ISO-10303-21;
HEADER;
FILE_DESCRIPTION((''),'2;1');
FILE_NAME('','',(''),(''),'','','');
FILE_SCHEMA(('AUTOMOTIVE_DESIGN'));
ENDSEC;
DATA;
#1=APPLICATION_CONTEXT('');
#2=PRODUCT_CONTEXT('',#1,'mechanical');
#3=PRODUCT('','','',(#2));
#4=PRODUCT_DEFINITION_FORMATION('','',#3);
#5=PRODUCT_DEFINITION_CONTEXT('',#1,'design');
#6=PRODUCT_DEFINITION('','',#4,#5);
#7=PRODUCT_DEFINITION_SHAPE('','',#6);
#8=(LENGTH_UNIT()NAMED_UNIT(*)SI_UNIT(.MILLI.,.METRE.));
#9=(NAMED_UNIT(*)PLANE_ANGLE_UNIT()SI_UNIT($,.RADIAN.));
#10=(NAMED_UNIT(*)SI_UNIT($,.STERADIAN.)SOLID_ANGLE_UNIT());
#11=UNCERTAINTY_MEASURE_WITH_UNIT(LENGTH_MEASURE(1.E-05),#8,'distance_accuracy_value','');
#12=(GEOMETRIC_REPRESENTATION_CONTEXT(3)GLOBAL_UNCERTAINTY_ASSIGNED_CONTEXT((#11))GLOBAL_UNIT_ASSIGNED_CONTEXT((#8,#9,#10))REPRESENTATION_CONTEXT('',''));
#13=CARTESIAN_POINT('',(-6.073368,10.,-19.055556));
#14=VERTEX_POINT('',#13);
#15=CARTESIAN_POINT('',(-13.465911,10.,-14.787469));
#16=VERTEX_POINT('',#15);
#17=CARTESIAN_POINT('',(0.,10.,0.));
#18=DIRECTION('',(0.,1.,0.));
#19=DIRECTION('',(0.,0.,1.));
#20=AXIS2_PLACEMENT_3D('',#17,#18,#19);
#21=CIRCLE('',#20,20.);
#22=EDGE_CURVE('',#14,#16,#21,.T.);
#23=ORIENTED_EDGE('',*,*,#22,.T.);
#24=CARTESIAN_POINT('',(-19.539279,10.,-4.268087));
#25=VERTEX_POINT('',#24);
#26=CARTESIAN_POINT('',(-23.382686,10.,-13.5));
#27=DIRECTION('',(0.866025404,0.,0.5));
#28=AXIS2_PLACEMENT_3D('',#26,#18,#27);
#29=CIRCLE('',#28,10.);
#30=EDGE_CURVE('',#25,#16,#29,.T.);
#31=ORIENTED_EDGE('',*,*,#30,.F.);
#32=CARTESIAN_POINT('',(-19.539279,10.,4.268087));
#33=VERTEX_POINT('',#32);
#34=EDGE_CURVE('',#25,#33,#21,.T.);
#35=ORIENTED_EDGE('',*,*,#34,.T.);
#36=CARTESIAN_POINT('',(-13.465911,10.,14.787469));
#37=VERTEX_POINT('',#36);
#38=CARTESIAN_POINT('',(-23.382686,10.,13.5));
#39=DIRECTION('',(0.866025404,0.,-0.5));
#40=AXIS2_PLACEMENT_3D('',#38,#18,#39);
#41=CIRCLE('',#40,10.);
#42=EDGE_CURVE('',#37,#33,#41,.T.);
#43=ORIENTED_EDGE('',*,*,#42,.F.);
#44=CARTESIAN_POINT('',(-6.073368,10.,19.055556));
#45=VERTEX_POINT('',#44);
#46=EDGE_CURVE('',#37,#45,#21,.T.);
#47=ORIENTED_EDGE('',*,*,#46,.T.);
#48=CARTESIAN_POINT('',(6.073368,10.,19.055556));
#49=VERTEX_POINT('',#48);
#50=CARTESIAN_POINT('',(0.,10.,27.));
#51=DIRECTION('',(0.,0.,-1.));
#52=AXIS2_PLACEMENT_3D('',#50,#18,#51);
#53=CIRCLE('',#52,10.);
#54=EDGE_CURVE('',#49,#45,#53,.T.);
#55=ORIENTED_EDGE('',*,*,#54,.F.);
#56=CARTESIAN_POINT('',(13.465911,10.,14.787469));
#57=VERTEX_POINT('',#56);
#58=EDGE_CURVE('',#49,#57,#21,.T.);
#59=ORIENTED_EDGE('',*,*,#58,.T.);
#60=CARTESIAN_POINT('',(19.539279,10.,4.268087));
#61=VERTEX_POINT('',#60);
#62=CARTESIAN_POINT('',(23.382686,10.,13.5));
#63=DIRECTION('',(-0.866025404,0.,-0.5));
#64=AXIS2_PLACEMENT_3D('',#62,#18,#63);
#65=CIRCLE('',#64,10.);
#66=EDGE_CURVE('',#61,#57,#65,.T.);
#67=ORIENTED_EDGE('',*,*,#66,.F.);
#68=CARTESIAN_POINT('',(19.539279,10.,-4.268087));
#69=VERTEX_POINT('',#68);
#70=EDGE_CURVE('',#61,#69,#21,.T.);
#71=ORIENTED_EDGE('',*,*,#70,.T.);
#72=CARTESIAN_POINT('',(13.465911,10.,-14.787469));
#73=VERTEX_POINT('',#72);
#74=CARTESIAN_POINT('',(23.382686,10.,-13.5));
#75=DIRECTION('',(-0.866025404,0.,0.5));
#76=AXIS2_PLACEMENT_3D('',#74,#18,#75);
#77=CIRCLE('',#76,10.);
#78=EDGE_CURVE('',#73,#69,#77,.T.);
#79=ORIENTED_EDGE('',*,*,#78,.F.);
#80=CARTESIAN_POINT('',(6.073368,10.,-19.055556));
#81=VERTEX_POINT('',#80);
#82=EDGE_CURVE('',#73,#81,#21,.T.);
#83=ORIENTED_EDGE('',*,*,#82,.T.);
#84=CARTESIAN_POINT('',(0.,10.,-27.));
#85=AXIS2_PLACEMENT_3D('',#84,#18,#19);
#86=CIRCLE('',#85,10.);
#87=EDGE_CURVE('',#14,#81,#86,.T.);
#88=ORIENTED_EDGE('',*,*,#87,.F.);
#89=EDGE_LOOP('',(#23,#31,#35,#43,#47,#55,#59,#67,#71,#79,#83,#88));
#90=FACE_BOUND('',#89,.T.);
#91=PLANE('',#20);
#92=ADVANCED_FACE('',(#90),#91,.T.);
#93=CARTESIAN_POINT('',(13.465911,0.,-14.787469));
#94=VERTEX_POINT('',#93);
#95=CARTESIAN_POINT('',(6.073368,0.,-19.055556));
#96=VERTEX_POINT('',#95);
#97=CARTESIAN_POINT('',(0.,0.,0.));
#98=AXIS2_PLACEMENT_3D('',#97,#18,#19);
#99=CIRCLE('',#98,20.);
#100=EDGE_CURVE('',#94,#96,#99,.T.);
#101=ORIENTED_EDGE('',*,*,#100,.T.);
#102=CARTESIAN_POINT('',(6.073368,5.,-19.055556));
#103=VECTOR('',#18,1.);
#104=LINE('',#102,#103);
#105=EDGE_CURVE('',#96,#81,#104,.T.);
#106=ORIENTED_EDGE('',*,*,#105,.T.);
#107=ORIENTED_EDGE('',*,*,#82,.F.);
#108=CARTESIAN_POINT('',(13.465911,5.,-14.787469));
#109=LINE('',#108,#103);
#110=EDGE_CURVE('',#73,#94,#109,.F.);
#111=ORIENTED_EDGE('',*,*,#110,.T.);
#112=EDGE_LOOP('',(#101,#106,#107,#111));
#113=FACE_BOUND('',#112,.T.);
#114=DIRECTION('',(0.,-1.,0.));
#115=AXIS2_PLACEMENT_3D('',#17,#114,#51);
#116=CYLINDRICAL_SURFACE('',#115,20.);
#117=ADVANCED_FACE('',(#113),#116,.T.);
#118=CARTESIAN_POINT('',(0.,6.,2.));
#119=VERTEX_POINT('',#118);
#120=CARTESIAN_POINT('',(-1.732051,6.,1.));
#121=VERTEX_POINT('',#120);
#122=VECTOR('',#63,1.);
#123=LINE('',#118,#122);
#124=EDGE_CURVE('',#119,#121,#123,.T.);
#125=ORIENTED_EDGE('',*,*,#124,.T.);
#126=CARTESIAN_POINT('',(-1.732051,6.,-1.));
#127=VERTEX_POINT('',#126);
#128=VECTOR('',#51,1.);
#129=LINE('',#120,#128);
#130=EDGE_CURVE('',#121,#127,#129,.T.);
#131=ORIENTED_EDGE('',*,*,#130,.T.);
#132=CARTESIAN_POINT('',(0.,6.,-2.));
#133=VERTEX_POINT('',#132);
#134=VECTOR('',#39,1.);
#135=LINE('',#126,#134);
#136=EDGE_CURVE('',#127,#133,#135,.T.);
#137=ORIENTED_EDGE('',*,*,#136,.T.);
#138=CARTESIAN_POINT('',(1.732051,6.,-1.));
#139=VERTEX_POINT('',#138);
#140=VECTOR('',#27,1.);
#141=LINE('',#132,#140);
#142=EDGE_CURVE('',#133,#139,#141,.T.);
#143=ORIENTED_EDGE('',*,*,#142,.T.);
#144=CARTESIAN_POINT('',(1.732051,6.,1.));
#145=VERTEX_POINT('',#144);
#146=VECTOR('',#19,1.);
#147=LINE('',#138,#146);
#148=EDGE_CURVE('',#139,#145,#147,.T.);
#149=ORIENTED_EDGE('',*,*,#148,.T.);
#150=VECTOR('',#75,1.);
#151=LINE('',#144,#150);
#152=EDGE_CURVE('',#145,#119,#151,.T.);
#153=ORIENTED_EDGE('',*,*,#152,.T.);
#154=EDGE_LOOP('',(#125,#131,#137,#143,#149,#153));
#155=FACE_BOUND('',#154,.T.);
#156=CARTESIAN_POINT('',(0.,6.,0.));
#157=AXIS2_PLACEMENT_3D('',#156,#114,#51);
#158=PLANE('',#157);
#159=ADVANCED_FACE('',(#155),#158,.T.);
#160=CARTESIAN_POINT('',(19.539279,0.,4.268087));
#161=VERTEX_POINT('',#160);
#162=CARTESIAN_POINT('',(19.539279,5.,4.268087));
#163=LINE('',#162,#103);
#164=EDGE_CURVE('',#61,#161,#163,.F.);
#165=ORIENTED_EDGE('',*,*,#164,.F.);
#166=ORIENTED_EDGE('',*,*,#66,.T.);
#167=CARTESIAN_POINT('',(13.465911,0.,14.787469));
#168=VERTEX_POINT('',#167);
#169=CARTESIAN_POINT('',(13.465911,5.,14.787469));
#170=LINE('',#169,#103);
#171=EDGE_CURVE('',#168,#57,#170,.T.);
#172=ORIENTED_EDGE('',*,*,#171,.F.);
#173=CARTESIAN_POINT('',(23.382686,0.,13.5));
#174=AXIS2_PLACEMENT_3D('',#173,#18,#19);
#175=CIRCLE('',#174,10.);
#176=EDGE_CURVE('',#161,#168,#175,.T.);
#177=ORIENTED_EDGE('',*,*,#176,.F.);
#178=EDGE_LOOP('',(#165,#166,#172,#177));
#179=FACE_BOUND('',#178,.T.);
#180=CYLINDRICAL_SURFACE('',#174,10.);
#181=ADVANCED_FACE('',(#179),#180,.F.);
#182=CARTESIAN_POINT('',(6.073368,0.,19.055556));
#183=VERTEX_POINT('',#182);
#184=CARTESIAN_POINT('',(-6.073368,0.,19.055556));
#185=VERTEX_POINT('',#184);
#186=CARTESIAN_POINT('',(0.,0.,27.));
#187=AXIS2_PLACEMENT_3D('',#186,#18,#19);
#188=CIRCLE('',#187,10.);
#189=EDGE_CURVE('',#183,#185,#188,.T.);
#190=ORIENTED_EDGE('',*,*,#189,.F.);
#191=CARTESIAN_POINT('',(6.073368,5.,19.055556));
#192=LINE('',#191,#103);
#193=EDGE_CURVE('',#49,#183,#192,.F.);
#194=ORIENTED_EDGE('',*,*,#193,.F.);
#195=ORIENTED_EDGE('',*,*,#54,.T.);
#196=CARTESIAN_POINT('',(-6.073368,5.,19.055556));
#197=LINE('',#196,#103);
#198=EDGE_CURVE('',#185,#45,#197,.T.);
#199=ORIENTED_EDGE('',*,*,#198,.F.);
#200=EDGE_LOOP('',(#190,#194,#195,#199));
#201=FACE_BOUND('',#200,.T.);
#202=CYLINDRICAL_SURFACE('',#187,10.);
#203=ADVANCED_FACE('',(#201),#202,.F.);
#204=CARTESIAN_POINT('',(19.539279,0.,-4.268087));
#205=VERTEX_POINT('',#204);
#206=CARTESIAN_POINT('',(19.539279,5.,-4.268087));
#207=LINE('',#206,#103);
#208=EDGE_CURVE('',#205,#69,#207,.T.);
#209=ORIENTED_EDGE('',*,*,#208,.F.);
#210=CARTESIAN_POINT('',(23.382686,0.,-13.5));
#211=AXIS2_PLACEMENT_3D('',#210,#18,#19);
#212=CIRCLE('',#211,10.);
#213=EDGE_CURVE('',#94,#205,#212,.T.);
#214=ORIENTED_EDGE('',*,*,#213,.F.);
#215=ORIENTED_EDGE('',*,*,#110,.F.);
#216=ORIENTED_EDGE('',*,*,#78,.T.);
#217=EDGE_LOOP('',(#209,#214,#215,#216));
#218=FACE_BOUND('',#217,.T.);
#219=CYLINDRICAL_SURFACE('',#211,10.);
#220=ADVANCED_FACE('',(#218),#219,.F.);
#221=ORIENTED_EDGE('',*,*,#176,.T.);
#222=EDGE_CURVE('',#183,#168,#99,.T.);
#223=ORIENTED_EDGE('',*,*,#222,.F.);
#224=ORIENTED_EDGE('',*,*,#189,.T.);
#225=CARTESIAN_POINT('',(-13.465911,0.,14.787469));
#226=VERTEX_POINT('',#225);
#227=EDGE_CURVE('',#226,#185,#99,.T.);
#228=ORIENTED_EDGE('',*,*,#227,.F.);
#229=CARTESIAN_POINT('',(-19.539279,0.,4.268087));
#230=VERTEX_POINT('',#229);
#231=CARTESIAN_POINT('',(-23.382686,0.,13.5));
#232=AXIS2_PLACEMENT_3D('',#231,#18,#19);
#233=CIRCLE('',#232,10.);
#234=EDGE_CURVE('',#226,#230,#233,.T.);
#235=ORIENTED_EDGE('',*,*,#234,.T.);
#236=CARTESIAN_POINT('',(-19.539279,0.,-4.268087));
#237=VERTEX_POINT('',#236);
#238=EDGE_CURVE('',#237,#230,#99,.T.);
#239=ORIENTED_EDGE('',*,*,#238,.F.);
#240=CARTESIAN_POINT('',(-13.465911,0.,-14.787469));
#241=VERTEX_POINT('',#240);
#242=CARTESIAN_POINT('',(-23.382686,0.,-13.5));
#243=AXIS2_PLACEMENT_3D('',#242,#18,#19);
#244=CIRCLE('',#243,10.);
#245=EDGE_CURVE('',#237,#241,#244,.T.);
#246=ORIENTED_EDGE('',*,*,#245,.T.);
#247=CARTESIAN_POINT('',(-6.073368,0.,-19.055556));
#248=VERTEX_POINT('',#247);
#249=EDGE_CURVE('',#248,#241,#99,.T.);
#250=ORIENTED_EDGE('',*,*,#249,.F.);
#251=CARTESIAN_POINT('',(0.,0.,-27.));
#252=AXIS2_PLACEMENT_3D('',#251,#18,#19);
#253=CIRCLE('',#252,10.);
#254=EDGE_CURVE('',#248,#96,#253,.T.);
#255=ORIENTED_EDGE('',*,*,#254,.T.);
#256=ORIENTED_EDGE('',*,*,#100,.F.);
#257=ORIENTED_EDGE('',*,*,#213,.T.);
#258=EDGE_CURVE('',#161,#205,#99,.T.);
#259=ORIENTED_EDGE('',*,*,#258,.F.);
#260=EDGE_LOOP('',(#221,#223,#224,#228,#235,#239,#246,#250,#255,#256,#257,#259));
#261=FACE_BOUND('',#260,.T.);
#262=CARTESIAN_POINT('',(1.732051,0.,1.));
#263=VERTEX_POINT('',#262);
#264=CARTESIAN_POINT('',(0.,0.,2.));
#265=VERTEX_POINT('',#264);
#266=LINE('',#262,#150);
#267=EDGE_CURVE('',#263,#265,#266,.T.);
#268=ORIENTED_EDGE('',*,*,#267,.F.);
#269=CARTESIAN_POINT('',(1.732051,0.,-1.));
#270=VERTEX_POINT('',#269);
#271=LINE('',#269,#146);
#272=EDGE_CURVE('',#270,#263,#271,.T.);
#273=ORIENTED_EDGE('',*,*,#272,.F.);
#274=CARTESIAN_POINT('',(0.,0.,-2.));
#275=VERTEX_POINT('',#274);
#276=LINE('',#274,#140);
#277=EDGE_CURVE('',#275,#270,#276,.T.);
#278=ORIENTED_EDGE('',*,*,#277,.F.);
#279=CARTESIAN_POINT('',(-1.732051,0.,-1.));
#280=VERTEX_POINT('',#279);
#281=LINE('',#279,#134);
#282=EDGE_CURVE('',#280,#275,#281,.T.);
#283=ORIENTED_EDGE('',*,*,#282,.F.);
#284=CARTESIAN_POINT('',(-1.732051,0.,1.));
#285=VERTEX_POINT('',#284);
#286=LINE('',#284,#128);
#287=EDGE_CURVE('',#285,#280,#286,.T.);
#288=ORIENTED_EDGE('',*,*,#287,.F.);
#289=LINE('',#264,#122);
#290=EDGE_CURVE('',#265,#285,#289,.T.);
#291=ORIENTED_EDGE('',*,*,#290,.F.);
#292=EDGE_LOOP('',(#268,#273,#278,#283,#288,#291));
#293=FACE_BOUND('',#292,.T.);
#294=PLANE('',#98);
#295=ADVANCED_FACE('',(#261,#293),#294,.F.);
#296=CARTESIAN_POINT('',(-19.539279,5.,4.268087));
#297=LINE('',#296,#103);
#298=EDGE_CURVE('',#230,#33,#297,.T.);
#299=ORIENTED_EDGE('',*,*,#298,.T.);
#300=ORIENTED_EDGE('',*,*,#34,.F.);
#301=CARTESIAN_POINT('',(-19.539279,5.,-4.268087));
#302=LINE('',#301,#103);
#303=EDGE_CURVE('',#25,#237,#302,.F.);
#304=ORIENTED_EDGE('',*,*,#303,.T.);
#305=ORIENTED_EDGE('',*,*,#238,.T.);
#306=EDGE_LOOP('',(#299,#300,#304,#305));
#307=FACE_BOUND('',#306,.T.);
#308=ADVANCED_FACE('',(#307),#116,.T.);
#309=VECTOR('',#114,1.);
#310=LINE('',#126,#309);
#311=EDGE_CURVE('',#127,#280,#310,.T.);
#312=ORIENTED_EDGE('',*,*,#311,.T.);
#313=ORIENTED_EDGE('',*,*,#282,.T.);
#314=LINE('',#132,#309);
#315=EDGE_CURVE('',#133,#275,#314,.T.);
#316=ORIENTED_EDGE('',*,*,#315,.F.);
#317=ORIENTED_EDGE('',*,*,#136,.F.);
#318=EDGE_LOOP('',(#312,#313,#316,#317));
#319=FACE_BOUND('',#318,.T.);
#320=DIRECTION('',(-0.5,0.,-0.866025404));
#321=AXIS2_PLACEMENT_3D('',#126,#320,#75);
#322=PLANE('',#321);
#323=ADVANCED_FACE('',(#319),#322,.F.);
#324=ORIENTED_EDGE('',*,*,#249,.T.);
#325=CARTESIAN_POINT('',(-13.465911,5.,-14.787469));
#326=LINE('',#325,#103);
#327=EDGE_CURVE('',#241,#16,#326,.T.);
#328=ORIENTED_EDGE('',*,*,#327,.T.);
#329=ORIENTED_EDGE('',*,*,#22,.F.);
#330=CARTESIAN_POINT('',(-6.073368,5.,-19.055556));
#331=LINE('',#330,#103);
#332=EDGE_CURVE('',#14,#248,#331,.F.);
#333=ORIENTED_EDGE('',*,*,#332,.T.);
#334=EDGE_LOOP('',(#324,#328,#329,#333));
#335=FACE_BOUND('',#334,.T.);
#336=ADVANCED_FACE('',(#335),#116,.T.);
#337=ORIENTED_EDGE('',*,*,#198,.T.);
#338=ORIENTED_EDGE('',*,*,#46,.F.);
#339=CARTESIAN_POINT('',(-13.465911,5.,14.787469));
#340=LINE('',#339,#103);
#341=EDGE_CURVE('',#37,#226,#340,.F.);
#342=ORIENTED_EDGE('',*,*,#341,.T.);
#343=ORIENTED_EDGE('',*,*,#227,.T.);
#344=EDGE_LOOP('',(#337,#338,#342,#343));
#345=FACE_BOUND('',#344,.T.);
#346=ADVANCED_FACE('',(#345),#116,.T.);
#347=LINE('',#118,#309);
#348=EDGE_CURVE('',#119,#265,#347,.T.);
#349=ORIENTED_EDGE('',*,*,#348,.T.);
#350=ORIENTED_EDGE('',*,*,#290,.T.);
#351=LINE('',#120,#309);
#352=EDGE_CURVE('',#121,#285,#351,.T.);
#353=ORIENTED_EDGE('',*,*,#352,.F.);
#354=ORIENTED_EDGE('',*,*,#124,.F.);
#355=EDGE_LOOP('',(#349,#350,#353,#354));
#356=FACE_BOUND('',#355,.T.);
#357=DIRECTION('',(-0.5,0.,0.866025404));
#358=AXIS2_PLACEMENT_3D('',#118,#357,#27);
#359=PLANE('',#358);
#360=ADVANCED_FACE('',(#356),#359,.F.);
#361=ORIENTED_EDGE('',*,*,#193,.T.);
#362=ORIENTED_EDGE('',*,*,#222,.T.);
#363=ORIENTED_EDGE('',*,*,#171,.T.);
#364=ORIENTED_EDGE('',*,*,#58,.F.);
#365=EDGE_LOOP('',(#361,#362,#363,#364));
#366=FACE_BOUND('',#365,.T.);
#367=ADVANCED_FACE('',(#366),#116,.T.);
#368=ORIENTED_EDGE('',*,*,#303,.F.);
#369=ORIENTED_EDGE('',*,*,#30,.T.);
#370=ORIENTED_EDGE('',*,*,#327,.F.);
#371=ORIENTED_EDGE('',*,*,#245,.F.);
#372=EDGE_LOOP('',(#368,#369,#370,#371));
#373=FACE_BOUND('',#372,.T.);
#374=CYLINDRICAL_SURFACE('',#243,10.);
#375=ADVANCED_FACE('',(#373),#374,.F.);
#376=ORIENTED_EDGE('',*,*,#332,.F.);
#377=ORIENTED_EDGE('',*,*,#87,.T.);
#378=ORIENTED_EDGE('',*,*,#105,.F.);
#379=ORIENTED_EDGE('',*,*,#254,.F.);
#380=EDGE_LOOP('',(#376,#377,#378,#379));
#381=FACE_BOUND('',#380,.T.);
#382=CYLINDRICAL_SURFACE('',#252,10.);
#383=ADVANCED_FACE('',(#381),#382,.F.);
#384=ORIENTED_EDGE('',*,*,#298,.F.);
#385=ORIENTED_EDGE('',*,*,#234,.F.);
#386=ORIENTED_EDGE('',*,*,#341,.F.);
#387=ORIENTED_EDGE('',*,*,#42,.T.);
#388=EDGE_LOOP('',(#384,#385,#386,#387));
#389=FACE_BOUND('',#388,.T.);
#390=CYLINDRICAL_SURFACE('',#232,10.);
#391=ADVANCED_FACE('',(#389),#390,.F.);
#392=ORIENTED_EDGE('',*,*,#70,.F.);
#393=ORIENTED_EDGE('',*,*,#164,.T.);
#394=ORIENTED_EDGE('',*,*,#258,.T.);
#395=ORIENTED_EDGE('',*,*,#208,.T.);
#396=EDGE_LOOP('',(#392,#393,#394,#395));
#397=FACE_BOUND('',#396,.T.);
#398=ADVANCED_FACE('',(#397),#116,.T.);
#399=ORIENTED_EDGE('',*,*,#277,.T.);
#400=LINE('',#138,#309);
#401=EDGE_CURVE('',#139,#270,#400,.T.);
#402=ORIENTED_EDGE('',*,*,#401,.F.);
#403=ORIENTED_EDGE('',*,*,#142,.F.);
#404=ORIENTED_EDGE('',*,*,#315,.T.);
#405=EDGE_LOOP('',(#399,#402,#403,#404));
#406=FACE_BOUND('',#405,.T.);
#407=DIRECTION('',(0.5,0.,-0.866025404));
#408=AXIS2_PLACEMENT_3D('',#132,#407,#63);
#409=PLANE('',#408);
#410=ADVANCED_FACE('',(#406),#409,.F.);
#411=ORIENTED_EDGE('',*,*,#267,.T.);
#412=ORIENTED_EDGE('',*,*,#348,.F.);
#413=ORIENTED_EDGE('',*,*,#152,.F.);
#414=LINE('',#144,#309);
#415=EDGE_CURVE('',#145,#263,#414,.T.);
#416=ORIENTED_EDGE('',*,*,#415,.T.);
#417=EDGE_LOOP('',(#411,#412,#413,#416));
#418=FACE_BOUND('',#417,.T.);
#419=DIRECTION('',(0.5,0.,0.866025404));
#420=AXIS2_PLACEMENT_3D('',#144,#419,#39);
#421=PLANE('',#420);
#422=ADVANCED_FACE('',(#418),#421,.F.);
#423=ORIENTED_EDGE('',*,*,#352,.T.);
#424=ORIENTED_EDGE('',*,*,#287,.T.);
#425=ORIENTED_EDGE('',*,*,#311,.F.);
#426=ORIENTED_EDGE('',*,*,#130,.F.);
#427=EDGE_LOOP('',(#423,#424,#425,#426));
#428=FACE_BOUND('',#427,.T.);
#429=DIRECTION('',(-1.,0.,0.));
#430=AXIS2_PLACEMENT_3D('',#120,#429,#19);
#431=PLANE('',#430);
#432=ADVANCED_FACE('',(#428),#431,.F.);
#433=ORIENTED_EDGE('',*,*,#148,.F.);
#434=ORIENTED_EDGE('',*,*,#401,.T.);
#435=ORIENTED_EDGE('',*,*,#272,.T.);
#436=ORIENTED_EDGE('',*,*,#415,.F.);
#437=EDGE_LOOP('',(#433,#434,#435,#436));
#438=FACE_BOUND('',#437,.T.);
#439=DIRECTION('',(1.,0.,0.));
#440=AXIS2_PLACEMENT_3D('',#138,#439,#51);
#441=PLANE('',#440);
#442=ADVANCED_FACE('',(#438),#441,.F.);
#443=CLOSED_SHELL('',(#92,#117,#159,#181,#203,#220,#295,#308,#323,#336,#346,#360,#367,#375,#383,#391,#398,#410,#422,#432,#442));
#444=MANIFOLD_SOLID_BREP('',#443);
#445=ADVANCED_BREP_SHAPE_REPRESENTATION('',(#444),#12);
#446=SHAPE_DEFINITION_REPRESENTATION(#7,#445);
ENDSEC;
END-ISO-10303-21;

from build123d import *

# Parameters (mm, degrees)
SCHIZZO1_R                   = 20
ESTRUSIONE_ESTRUSIONE1_DEPTH = 10
SCHIZZO2_R                   = 10
TAGLIO_ESTRUSIONE1_DEPTH     = 10
RIPETIZIONECIRCOLARE1_DEPTH  = 10
TAGLIO_ESTRUSIONE2_DEPTH     = 6


# Read off the part's stored shape, not the designer's step: RipetizioneCircolare1
with BuildPart() as part:
    # Schizzo1 → Estrusione-Estrusione1 (new body)
    with BuildSketch(Plane(origin=(0, 0, 0), x_dir=(1, 0, 0), z_dir=(0, 1, 0))):
        with Locations(Location((0, 0, 0), (0, 0, 270))):
            Circle(SCHIZZO1_R)
    extrude(amount=ESTRUSIONE_ESTRUSIONE1_DEPTH)

    # Schizzo2 → Taglio-Estrusione1 (cut)
    with BuildSketch(Plane(origin=(0, 10, 0), x_dir=(1, 0, 0), z_dir=(0, 1, 0))):
        with Locations((0, 27)):
            Circle(SCHIZZO2_R)
    extrude(amount=-TAGLIO_ESTRUSIONE1_DEPTH, mode=Mode.SUBTRACT)

    # RipetizioneCircolare1 outline → RipetizioneCircolare1 (cut)
    with BuildSketch(Plane(origin=(0, 0, 0), x_dir=(1, 0, 0), z_dir=(0, 1, 0))):
        with BuildLine():
            ThreePointArc((-13.465911046, 14.787469009), (-17.320508076, 10), (-19.539279343, 4.268086546))
            ThreePointArc((-19.539279343, 4.268086546), (-14.722431864, 8.5), (-13.465911046, 14.787469009))
        make_face()
        with BuildLine():
            ThreePointArc((13.465911046, 14.787469009), (14.722431864, 8.5), (19.539279343, 4.268086546))
            ThreePointArc((19.539279343, 4.268086546), (17.320508076, 10), (13.465911046, 14.787469009))
        make_face()
        with BuildLine():
            ThreePointArc((19.539279343, -4.268086546), (14.722431864, -8.5), (13.465911046, -14.787469009))
            ThreePointArc((13.465911046, -14.787469009), (17.320508076, -10), (19.539279343, -4.268086546))
        make_face()
        with BuildLine():
            ThreePointArc((6.073368297, -19.055555556), (0, -17), (-6.073368297, -19.055555556))
            ThreePointArc((-6.073368297, -19.055555556), (0, -20), (6.073368297, -19.055555556))
        make_face()
        with BuildLine():
            ThreePointArc((-13.465911046, -14.787469009), (-14.722431864, -8.5), (-19.539279343, -4.268086546))
            ThreePointArc((-19.539279343, -4.268086546), (-17.320508076, -10), (-13.465911046, -14.787469009))
        make_face()
    extrude(amount=RIPETIZIONECIRCOLARE1_DEPTH, mode=Mode.SUBTRACT)

    # Schizzo3 → Taglio-Estrusione2 (cut)
    with BuildSketch(Plane.XZ):
        Polygon((0, 2), (-1.732050808, 1), (-1.732050808, -1), (0, -2), (1.732050808, -1), (1.732050808, 1), align=None)
    extrude(amount=-TAGLIO_ESTRUSIONE2_DEPTH, mode=Mode.SUBTRACT)


solid = part.part
